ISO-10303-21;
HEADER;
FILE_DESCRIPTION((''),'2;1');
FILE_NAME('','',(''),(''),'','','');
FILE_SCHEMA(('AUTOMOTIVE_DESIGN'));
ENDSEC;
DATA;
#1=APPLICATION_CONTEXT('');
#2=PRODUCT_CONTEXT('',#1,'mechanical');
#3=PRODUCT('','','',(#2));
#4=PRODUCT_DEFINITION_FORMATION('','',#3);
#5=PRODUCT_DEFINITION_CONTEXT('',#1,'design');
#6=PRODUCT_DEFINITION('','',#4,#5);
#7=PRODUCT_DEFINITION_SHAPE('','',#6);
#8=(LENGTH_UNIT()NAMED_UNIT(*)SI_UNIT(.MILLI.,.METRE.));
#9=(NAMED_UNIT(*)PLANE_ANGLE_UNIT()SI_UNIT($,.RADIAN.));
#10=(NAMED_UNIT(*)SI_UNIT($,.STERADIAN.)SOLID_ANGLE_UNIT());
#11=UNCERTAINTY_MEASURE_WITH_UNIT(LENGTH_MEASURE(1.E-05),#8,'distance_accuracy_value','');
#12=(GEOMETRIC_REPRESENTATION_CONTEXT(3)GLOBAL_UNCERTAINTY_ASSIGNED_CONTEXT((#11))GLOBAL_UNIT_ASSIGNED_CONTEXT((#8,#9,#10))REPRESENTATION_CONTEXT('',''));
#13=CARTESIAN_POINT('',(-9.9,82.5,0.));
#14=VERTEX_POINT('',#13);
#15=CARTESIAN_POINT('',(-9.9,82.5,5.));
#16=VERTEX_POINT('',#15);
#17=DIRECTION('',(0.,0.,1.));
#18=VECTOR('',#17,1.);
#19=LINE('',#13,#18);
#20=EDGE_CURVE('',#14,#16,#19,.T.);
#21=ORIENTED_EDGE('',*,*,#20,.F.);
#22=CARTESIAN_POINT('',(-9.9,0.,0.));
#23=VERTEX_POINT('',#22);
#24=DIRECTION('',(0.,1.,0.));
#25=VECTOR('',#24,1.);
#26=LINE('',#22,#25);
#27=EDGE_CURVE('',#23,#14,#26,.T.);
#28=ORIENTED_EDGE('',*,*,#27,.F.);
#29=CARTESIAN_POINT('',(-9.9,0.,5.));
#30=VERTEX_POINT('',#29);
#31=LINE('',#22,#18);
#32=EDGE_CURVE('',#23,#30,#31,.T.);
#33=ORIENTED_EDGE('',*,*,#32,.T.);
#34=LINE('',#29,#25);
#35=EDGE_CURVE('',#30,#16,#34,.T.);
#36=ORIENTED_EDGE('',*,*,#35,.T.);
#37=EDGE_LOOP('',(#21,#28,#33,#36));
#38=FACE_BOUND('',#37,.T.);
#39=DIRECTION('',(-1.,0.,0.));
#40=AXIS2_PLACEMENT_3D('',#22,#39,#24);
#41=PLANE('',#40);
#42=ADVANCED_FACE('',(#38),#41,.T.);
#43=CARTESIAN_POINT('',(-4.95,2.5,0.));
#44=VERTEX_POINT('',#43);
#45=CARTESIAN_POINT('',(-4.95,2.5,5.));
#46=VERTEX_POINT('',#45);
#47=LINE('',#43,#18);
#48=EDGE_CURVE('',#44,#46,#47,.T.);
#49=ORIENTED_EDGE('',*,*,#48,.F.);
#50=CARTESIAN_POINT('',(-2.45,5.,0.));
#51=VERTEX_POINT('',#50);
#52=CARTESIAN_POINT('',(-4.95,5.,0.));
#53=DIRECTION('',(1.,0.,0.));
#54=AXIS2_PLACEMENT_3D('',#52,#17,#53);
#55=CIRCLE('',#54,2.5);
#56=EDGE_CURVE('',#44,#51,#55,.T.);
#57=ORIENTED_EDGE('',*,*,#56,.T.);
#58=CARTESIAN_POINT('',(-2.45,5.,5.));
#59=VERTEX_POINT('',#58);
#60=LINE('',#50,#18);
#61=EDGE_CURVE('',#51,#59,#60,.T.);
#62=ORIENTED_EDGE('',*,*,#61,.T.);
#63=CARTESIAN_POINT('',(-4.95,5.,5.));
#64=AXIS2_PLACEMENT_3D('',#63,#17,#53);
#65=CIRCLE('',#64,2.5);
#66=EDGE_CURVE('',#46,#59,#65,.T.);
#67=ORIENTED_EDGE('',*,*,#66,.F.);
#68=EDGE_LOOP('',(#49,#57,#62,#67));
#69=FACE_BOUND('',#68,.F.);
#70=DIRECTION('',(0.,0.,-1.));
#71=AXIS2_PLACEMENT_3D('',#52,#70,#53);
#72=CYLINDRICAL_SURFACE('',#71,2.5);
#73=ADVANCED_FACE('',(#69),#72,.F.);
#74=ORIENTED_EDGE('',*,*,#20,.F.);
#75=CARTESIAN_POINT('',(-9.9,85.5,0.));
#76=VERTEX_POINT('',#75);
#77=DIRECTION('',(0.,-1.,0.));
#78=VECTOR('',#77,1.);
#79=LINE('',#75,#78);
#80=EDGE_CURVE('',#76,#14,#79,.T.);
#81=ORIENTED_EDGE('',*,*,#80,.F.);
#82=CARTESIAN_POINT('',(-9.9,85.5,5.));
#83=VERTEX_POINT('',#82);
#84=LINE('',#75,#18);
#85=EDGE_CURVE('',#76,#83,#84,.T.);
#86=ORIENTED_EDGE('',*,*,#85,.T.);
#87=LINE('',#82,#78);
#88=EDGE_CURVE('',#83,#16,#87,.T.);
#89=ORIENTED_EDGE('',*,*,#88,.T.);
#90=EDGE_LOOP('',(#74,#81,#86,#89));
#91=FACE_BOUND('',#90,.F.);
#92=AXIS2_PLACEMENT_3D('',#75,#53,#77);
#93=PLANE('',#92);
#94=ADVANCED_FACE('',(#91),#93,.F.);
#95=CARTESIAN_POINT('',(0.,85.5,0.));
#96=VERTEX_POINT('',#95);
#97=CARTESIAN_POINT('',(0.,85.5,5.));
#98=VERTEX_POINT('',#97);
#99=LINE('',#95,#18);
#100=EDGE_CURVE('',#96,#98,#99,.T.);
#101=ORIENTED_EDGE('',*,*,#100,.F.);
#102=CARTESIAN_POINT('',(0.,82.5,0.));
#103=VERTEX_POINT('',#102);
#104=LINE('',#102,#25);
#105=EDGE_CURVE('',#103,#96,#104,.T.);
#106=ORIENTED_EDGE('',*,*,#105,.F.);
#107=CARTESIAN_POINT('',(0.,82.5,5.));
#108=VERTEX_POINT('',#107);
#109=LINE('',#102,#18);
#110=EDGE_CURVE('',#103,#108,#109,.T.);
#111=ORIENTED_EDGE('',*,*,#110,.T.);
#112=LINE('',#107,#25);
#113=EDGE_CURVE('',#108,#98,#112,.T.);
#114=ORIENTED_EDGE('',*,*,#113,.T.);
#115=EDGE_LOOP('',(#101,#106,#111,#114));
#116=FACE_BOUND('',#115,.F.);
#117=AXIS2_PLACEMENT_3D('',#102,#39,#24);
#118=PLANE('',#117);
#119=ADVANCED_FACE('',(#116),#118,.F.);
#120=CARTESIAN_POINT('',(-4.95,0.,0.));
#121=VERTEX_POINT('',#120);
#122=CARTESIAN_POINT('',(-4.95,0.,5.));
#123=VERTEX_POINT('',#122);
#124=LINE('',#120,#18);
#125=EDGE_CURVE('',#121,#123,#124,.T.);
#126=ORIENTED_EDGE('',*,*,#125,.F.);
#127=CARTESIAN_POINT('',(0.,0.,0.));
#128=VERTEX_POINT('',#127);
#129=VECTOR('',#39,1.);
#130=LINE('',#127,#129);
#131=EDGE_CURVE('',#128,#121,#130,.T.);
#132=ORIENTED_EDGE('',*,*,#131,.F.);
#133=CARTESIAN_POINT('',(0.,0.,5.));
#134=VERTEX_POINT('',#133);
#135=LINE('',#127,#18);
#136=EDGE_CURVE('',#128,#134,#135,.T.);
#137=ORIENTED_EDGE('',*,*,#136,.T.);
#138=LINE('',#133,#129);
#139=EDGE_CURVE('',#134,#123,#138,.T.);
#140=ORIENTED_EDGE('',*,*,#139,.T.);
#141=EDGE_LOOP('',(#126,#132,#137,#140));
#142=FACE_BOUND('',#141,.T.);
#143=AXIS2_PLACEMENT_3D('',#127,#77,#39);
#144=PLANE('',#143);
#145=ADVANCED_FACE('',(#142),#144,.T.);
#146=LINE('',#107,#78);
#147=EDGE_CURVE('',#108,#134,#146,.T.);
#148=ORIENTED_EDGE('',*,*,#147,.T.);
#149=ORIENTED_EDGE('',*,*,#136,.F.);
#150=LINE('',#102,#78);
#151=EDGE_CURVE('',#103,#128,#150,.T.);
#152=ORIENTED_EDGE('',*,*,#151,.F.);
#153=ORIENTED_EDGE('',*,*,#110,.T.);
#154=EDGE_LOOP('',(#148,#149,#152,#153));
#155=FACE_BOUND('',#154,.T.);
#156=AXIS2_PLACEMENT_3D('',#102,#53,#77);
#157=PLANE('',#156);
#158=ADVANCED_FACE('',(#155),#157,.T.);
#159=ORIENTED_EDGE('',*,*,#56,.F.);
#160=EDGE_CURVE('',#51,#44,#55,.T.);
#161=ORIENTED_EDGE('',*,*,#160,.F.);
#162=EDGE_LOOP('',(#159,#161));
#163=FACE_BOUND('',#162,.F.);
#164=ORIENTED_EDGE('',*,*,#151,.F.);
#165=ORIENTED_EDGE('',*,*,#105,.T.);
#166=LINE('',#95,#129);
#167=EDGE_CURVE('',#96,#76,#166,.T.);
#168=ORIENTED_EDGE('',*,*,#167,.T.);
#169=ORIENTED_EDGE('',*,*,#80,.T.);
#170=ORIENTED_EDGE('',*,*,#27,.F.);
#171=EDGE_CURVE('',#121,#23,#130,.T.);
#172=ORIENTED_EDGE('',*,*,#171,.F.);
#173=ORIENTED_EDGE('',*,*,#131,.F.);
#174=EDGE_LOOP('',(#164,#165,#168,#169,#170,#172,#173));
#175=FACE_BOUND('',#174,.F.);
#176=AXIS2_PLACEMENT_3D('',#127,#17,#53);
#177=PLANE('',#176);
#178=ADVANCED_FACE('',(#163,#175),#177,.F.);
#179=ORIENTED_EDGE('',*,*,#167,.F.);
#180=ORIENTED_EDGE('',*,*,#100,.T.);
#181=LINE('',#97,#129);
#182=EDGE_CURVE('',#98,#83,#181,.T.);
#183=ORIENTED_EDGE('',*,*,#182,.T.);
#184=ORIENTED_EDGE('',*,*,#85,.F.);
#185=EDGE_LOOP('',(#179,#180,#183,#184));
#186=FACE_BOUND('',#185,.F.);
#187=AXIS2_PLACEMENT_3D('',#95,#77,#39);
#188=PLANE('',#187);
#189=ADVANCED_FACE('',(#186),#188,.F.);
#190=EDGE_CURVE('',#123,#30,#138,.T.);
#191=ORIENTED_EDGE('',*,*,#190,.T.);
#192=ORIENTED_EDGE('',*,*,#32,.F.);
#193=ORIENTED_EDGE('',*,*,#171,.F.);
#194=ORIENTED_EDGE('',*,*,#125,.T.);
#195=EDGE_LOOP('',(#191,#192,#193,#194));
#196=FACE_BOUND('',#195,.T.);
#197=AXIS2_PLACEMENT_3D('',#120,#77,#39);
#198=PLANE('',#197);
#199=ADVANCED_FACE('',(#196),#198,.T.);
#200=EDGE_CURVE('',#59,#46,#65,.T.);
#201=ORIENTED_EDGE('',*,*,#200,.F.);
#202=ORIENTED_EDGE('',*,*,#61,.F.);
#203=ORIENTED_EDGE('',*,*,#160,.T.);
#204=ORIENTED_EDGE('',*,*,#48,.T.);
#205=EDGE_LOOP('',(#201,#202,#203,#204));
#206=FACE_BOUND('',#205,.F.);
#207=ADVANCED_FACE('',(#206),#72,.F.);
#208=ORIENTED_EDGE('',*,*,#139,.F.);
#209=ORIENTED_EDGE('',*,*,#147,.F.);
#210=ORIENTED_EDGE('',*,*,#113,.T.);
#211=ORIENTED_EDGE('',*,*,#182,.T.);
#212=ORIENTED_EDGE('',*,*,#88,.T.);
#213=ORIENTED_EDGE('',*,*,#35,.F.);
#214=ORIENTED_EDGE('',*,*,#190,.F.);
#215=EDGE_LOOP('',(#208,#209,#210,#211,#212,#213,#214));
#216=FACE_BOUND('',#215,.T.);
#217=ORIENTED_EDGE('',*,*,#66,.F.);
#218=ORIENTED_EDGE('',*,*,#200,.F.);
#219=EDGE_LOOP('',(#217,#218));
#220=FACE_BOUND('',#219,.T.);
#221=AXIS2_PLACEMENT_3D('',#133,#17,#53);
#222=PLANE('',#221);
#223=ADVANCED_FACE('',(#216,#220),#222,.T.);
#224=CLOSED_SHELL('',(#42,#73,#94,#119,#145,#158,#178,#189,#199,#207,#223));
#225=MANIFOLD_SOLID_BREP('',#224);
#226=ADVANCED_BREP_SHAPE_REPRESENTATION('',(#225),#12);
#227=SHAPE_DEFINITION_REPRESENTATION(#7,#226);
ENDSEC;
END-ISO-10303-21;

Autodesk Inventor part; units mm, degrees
ref_plane "YZ Plane" through (0, 0, 0) normal (1, 0, 0) x (0, 1, 0)
ref_plane "XZ Plane" through (0, 0, 0) normal (0, 1, 0) x (-1, 0, 0)
ref_plane "XY Plane" through (0, 0, 0) normal (0, 0, 1) x (1, 0, 0)
sketch "Sketch2" plane through (0, 0, 0) normal (0, 0, 1) x (1, 0, 0)
  line L0 (0, 0) -> (-9.9, 0)
  line L1 (-4.95, 0) -> (-4.95, 2.5)
  line L2 (-4.95, 0) -> (-2.45, 0) construction
  circle A0 centre (-4.95, 5) radius 2.5
  line L3 (-4.95, 7.5) -> (32.05, 7.5) construction
  line L4 (0, 0) -> (-9.9, 0)
  line L5 (0, 0) -> (-9.9, 0)
  line L6 (-4.95, 7.5) -> (66.05, 7.5) construction
  line L7 (-4.95, 7.5) -> (70.05, 7.5) construction
  line L8 (0, 0) -> (-9.9, 0)
  line L9 (-9.9, 0) -> (-9.9, 82.5)
  line L10 (0, 82.5) -> (0, 0)
  line L11 (0, 82.5) -> (0, 85.5)
  line L12 (0, 85.5) -> (-9.9, 85.5)
  line L13 (-9.9, 85.5) -> (-9.9, 82.5)
  dimension "d35" = 5
  dimension "d33" = 2.5
  dimension "d34" = 90
  dimension "d48" = 9.9
  dimension "d49" = 9.9
  dimension "d50" = 3
extrude "Extrusion6" add sketch "Sketch2" along normal blind 5
properties part number "Cube_Holder_SB_V1_(71mm)"
